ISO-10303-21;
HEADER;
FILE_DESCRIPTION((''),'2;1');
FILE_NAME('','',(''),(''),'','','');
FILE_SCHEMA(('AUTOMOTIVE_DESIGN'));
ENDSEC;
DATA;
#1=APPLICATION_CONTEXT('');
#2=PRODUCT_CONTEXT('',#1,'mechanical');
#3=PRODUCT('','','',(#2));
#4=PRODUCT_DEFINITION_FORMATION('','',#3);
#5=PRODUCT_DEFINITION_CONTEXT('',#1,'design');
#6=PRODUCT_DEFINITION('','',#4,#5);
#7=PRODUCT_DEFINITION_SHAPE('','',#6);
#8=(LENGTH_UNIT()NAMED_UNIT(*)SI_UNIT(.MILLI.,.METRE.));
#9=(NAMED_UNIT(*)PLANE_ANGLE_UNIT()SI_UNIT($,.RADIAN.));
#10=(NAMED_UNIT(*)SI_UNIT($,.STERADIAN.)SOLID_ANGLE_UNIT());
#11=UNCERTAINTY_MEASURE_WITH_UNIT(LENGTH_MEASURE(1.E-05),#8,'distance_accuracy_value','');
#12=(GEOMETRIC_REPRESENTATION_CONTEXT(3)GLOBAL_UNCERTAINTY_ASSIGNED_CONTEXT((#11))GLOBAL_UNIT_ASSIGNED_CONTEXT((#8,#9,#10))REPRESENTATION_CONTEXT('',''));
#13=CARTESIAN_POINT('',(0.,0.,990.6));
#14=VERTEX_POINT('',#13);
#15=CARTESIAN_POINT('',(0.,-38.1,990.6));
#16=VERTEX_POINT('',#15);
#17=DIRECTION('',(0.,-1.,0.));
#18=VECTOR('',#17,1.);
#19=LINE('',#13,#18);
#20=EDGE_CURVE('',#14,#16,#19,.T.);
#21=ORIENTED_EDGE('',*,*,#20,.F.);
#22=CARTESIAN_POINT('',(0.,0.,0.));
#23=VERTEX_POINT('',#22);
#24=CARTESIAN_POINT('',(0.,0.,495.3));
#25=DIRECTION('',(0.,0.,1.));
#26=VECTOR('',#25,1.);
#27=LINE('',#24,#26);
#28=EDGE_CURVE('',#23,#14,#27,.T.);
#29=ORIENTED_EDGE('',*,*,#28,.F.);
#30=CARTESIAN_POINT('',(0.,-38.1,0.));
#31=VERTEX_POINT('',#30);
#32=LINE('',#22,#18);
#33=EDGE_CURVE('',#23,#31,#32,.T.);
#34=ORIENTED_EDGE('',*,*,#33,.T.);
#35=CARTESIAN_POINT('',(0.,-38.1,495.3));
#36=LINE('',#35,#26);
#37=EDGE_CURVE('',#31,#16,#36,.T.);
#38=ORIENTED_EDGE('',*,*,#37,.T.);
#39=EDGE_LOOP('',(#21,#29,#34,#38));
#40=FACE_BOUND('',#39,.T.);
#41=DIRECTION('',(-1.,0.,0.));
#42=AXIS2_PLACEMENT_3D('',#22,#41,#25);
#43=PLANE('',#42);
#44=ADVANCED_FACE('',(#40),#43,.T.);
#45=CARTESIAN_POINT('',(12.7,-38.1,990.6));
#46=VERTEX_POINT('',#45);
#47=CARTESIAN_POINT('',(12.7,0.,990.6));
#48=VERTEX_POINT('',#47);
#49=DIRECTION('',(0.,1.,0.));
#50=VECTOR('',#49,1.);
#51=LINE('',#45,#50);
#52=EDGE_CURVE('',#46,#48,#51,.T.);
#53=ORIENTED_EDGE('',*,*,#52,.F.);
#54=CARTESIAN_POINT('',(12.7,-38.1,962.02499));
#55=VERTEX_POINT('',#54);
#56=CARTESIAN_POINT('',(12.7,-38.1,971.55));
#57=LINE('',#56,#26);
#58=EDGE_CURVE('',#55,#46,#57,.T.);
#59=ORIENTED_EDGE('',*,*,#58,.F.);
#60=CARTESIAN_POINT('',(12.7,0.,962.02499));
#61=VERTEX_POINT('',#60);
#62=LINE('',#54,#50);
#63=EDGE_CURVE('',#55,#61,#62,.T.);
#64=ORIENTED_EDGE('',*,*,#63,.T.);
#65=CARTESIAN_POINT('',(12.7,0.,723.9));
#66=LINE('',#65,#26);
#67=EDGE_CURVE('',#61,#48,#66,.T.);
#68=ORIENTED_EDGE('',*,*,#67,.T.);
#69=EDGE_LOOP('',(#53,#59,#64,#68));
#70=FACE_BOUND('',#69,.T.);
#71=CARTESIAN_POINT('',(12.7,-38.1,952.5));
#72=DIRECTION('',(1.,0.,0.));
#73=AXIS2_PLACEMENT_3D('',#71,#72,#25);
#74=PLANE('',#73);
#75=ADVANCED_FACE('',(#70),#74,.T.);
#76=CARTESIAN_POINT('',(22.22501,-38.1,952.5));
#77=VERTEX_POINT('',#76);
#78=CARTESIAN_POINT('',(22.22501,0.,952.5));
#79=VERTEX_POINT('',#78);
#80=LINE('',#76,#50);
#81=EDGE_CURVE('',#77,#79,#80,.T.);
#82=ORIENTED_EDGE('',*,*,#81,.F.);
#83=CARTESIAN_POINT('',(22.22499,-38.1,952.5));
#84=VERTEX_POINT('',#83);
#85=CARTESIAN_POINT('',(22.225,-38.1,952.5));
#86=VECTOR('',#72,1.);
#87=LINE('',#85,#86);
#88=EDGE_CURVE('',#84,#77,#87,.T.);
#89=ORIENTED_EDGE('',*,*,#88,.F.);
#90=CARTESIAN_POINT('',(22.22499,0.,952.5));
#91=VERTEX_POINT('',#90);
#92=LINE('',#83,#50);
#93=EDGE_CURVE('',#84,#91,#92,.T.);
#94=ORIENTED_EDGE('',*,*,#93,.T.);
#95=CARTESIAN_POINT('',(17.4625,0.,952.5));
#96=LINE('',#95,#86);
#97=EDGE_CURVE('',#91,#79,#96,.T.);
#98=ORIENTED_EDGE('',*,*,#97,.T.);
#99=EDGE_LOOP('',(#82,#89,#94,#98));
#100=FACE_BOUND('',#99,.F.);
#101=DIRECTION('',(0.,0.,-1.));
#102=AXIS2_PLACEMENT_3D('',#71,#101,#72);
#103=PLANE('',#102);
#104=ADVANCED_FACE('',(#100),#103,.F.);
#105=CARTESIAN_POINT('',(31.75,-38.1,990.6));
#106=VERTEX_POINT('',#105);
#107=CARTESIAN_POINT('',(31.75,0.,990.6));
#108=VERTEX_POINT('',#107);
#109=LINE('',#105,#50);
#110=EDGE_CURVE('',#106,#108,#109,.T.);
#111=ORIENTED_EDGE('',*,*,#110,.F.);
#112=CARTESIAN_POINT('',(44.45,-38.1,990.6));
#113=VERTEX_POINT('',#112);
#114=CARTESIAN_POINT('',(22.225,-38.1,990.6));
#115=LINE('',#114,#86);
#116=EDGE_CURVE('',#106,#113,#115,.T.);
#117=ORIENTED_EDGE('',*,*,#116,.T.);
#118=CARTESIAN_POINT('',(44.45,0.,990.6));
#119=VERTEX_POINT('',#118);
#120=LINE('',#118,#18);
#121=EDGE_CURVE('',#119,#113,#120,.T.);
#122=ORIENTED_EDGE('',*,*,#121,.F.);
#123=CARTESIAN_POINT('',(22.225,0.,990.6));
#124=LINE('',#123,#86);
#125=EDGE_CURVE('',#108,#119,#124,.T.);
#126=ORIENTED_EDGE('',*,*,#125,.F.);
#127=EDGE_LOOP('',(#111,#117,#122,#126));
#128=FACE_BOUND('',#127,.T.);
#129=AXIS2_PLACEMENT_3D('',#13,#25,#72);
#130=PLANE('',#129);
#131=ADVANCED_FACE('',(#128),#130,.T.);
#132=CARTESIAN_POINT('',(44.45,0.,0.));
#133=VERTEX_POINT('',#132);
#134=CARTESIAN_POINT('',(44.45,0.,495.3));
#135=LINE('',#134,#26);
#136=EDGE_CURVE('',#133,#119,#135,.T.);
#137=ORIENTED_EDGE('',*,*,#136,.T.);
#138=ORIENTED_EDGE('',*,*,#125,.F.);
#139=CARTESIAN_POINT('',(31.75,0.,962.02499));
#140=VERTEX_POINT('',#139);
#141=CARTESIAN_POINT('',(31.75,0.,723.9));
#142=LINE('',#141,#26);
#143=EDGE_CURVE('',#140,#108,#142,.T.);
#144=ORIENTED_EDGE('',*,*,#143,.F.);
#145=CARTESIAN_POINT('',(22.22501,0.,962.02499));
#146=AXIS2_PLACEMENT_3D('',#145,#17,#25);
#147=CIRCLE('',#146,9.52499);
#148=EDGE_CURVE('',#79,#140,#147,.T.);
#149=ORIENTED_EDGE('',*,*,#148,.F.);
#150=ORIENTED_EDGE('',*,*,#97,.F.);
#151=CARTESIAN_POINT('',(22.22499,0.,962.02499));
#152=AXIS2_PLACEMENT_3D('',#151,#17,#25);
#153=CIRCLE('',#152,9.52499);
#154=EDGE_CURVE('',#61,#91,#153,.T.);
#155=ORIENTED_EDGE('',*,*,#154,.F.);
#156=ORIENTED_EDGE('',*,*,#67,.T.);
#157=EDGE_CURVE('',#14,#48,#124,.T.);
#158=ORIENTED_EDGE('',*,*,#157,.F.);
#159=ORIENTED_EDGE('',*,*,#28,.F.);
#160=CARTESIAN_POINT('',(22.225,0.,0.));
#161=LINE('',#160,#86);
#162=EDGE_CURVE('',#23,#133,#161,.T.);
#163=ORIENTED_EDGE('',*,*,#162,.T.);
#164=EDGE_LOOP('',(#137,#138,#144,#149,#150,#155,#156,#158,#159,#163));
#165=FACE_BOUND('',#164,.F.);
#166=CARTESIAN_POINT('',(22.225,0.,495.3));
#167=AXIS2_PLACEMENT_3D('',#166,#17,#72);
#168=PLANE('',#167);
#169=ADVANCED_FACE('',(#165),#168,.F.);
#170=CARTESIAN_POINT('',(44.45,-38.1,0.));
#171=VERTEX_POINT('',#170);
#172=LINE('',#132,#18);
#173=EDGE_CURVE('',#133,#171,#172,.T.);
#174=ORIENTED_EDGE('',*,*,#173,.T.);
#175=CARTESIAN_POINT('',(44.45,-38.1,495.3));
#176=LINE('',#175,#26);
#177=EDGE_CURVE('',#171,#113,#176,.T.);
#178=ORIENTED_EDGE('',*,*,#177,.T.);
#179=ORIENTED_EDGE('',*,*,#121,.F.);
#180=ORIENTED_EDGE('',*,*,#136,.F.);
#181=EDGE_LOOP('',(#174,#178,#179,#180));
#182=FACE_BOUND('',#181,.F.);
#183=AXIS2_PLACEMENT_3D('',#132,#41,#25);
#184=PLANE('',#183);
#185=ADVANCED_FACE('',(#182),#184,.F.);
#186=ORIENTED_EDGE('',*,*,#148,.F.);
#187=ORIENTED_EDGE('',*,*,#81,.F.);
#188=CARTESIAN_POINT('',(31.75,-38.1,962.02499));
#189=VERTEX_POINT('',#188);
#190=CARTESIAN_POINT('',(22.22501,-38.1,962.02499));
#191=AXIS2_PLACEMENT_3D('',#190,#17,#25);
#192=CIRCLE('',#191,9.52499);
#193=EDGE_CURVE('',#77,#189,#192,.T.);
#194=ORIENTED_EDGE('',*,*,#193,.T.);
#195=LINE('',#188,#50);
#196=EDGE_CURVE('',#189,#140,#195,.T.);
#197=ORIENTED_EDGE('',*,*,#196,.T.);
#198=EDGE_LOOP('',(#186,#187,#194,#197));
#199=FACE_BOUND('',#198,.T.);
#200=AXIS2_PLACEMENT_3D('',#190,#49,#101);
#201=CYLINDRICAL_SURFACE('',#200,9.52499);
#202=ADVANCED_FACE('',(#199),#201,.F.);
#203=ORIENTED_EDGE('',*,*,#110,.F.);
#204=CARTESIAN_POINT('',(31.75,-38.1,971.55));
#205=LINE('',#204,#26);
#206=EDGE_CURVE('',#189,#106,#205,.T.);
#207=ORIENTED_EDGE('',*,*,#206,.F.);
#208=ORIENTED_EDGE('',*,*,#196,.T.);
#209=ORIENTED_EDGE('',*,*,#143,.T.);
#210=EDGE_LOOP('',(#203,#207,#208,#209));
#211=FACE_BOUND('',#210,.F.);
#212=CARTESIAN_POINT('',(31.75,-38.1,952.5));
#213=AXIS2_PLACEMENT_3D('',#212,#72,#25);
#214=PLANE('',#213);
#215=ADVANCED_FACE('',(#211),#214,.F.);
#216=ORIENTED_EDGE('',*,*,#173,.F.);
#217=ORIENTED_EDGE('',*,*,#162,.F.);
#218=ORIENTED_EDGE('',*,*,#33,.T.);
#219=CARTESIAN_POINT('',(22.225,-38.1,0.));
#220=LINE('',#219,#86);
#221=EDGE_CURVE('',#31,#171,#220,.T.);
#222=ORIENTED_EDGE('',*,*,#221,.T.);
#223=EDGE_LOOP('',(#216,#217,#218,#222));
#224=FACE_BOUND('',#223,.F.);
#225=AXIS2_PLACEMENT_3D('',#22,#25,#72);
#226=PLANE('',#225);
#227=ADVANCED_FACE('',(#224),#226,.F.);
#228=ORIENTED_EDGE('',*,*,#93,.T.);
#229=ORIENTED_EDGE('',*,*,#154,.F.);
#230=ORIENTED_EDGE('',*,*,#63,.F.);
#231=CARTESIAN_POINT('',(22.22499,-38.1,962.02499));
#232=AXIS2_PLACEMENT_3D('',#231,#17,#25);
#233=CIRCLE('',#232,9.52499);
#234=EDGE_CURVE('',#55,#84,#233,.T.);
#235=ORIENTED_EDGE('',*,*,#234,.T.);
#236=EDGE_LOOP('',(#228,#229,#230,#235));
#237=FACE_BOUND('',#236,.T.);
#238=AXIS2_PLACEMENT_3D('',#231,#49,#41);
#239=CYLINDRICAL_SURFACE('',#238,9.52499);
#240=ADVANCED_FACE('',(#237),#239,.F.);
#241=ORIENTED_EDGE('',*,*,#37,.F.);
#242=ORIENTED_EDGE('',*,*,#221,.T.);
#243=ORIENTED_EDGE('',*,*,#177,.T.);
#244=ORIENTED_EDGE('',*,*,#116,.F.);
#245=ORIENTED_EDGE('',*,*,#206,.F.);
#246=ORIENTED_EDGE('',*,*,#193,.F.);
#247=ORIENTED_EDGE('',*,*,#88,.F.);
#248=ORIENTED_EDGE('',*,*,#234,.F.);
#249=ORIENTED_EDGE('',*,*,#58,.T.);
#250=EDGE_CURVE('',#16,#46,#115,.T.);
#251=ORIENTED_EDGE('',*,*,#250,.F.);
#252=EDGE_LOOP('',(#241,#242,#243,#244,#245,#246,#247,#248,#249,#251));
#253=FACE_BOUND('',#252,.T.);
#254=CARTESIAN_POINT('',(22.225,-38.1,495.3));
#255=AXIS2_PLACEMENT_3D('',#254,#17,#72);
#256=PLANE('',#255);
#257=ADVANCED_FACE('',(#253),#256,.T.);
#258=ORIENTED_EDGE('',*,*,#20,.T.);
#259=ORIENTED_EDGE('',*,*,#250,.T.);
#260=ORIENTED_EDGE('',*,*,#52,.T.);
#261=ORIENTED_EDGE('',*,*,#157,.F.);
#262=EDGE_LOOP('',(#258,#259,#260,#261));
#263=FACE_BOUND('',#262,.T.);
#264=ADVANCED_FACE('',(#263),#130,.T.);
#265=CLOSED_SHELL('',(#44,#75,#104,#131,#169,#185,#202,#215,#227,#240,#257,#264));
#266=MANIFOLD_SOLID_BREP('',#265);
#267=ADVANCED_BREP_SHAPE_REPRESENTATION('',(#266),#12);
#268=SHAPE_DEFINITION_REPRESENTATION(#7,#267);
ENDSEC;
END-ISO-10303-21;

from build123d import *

# Parameters (mm, degrees)
F0_W     = 44.45
F0_H     = 990.6
F1_DEPTH = 38.1
F2_W     = 19.05
F2_H     = 38.1
F3_DEPTH = 38.101
F4_R     = 9.52499


# Not quite as in the source:
# - a fillet or chamfer is up to 0.001 mm smaller than in the source, because OpenCascade refuses the exact size


with BuildPart() as f1:
    # F0 (on Front) → F1 (new body)
    with BuildSketch(Plane.XZ):
        with Locations((22.225, 495.3)):
            Rectangle(F0_W, F0_H)
    extrude(amount=F1_DEPTH)

    # F2 (on face) → F3 (cut, through all)
    with BuildSketch(Plane.XZ.offset(38.1)):
        with Locations((22.225, 971.55)):
            Rectangle(F2_W, F2_H)
    extrude(amount=-F3_DEPTH, mode=Mode.SUBTRACT)

    # F4 (radius 9.525 in the source; OpenCascade refuses exactly that, so slightly less here)
    f4_edges = [f1.edges().sort_by_distance(p)[0] for p in [
        (12.7, -19.05, 952.5),
        (31.75, -19.05, 952.5),
    ]]
    fillet(f4_edges, radius=F4_R)


solid = f1.part
